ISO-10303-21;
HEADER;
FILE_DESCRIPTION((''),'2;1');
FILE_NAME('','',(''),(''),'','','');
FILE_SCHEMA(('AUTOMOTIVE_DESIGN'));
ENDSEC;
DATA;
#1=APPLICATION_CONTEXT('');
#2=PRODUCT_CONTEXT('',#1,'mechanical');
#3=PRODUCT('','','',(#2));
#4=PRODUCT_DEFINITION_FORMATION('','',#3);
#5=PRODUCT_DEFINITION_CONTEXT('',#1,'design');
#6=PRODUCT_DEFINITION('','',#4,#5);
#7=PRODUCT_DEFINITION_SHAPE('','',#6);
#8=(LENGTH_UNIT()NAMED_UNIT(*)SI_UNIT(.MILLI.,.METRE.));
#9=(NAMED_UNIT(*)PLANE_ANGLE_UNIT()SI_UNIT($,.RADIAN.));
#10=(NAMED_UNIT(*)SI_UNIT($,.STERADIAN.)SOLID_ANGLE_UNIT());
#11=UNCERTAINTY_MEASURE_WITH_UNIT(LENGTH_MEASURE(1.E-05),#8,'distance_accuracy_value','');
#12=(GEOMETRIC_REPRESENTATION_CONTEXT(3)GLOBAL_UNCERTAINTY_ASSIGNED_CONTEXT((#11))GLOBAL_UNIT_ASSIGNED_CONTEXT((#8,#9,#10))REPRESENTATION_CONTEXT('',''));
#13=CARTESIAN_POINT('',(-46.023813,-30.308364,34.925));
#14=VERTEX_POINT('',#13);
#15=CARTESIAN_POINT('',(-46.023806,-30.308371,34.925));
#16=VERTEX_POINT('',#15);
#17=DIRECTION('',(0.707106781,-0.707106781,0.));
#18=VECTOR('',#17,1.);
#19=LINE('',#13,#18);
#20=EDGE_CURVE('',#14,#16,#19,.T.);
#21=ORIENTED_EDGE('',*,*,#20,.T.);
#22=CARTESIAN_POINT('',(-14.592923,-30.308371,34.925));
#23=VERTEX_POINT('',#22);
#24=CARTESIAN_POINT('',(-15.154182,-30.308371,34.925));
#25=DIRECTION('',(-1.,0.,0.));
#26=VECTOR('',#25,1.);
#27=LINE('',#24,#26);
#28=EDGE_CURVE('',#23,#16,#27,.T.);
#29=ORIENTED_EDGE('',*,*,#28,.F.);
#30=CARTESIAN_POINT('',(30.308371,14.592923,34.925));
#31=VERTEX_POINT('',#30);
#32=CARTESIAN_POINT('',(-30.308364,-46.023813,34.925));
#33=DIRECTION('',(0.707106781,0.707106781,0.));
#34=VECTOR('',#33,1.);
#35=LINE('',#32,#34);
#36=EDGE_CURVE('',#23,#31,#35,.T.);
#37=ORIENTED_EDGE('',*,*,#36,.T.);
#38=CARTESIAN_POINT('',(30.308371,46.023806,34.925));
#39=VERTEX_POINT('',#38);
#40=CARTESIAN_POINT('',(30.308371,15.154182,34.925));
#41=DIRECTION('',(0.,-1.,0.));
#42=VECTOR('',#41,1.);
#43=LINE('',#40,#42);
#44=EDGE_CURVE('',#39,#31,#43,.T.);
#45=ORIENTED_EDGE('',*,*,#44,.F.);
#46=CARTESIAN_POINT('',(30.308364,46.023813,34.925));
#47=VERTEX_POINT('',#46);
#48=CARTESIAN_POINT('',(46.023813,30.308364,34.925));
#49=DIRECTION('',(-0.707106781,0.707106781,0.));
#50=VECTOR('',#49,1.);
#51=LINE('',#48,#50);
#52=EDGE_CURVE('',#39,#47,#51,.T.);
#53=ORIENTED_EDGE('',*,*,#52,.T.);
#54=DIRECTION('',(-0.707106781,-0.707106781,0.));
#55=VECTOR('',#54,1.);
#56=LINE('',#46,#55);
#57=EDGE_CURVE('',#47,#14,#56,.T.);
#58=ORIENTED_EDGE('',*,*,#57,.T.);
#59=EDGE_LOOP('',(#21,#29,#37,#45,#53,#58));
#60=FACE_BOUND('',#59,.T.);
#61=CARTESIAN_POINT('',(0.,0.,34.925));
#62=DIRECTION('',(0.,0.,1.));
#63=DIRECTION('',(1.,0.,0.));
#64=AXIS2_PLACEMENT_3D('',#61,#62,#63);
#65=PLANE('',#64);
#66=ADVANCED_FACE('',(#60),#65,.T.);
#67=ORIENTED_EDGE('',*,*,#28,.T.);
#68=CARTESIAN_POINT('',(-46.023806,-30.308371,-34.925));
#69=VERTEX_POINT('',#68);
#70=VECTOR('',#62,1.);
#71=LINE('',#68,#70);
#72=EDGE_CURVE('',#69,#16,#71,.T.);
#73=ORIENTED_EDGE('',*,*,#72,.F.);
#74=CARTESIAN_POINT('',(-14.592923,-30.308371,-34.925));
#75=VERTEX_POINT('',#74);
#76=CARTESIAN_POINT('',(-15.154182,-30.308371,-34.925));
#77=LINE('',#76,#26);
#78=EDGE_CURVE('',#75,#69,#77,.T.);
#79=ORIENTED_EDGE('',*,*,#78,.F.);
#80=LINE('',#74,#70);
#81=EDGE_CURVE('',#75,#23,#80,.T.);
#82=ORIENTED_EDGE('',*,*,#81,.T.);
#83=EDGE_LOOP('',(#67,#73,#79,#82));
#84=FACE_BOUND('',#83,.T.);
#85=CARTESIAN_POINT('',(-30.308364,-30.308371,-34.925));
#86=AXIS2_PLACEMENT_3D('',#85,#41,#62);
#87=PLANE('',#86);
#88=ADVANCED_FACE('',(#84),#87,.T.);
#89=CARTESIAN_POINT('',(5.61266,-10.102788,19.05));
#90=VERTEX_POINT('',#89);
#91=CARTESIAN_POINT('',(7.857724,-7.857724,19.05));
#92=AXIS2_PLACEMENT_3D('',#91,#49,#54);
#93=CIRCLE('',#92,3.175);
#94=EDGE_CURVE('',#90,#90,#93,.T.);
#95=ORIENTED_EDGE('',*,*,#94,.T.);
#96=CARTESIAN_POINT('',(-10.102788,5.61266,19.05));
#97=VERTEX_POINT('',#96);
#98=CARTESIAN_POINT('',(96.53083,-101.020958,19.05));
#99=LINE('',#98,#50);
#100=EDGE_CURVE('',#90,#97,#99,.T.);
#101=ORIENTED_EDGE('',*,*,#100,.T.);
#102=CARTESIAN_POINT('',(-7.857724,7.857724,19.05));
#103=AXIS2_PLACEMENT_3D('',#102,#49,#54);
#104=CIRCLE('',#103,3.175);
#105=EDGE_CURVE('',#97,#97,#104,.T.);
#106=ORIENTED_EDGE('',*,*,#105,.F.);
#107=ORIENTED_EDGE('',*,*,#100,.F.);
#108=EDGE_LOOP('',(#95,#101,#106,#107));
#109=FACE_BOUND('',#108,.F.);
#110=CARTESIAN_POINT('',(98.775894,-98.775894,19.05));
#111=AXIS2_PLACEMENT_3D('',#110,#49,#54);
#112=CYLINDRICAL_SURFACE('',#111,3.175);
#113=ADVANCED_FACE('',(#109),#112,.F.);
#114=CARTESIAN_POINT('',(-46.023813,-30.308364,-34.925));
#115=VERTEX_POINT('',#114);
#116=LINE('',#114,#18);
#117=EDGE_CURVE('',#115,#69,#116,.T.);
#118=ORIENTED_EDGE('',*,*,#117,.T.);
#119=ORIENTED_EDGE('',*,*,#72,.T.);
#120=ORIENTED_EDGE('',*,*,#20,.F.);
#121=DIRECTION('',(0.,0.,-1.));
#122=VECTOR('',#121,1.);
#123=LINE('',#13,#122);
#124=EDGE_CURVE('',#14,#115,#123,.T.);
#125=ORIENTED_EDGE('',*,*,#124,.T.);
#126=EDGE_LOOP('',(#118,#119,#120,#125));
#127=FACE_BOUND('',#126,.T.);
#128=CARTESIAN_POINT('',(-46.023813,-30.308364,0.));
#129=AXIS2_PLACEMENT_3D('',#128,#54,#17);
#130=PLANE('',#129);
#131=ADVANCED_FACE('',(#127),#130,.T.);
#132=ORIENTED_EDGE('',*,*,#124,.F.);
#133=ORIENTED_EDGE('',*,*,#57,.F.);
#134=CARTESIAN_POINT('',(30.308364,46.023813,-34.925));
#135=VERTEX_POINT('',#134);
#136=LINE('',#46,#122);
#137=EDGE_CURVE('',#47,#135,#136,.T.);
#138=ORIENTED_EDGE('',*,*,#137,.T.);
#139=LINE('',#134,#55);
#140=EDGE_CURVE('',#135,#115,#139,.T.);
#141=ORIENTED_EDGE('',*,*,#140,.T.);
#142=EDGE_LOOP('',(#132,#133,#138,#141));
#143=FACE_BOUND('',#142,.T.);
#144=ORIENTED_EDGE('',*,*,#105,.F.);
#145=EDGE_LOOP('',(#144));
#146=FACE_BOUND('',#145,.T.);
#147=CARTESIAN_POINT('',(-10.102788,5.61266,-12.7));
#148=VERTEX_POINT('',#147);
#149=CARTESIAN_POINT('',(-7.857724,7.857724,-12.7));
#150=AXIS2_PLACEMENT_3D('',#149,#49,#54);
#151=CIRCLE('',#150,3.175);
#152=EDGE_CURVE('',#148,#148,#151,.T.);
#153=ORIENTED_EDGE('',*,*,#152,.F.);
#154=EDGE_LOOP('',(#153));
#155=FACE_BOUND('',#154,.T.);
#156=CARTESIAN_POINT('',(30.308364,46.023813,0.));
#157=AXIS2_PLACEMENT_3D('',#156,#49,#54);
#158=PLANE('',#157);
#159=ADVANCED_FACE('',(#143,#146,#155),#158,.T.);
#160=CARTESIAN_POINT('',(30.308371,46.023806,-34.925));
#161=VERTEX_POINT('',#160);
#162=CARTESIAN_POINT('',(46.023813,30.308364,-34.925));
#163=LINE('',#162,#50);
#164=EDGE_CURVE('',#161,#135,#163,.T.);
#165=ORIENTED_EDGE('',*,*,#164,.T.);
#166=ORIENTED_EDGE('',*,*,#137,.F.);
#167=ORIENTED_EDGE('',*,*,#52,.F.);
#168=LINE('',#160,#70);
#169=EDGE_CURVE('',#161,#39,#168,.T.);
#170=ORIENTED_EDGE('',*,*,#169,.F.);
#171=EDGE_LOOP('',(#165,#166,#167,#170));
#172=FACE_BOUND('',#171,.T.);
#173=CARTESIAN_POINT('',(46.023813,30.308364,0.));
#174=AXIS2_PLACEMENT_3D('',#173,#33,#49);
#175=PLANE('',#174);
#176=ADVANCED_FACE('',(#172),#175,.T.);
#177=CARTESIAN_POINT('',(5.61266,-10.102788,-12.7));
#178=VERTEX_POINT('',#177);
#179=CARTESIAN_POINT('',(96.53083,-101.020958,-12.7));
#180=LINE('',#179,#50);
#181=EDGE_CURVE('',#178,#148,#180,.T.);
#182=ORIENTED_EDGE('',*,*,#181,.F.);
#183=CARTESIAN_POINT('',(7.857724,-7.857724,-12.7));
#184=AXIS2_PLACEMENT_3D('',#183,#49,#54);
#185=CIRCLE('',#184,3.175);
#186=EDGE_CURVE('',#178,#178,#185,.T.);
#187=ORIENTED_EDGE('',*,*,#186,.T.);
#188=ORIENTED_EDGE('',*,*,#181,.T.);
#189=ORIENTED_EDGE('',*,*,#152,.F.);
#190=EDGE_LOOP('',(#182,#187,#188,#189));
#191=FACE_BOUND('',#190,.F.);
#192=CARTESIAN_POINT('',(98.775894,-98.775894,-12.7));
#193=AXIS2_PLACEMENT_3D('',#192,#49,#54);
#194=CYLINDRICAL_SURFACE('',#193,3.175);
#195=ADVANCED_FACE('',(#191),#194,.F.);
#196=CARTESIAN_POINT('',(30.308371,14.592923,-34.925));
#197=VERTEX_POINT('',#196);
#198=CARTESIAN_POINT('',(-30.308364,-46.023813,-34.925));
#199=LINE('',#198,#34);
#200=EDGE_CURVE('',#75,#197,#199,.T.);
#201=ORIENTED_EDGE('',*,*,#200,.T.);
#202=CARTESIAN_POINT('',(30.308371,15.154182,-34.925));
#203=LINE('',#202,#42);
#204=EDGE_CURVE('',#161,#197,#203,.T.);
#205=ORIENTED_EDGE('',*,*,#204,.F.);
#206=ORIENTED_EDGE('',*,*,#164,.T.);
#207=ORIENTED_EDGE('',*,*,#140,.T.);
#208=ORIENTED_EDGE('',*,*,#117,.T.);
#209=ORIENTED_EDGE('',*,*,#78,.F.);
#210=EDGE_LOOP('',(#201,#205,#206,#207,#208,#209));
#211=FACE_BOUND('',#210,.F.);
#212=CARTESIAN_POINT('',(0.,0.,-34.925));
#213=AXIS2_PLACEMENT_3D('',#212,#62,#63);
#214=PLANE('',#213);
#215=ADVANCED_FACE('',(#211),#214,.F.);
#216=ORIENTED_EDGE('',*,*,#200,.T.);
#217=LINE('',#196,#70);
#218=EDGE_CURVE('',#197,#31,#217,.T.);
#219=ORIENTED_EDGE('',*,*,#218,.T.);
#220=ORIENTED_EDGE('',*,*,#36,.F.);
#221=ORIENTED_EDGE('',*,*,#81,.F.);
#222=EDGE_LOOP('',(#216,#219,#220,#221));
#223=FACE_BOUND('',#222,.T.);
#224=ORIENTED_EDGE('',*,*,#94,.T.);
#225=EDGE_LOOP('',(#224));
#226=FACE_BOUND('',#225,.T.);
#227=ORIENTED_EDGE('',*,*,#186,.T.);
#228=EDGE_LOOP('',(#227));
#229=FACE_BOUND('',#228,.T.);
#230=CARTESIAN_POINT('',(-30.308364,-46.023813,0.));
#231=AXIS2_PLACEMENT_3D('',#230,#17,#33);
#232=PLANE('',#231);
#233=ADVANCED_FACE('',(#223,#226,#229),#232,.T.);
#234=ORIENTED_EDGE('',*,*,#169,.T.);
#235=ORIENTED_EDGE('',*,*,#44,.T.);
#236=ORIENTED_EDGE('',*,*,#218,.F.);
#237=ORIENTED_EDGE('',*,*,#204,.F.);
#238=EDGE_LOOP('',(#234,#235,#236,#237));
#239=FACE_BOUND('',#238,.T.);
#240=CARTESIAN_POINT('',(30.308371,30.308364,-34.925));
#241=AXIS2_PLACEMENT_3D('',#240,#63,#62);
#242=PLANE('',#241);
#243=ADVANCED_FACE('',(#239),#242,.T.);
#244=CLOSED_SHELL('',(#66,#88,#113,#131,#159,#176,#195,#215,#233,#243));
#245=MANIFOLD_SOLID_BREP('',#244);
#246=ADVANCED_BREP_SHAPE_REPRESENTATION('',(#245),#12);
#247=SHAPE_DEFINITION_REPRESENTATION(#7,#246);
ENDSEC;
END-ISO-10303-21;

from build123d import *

# Parameters (mm, degrees)
F1_DEPTH = 34.925
F2_SIZE  = 22.22499
F3_SIZE  = 22.22499
F5_D     = 6.35
F6_D     = 6.35


# Not quite as in the source:
# - a fillet or chamfer is up to 0.001 mm smaller than in the source, because OpenCascade refuses the exact size


with BuildPart() as f1:
    # F0 (on Top) → F1 (new body, symmetric)
    with BuildSketch(Plane.XY):
        Polygon((-46.0238126205, -30.3083644086), (-30.3083644086, -46.0238126205), (46.0238126205, 30.3083644086), (30.3083644086, 46.0238126205), align=None)
    extrude(amount=F1_DEPTH, both=True)

    # F2 (size 22.225 in the source; OpenCascade refuses exactly that, so slightly less here)
    f2_edges = [f1.edges().sort_by_distance(p)[0] for p in [
        (46.023813, 30.308364, 0),
    ]]
    chamfer(f2_edges, length=F2_SIZE)

    # F3 (size 22.225 in the source; OpenCascade refuses exactly that, so slightly less here)
    f3_edges = [f1.edges().sort_by_distance(p)[0] for p in [
        (-30.308364, -46.023813, 0),
    ]]
    chamfer(f3_edges, length=F3_SIZE)

    # F5 (through all)
    with Locations(Plane(origin=(7.8577241059, -7.8577241059, 0), x_dir=(0.7071067812, 0.7071067812, 0), z_dir=(0.7071067812, -0.7071067812, 0))):
        with Locations((0, 19.05)):
            Hole(F5_D / 2)

    # F6 (through all)
    with Locations(Plane(origin=(7.8577241059, -7.8577241059, 0), x_dir=(0.7071067812, 0.7071067812, 0), z_dir=(0.7071067812, -0.7071067812, 0))):
        with Locations((0, -12.7)):
            Hole(F6_D / 2)


solid = f1.part
